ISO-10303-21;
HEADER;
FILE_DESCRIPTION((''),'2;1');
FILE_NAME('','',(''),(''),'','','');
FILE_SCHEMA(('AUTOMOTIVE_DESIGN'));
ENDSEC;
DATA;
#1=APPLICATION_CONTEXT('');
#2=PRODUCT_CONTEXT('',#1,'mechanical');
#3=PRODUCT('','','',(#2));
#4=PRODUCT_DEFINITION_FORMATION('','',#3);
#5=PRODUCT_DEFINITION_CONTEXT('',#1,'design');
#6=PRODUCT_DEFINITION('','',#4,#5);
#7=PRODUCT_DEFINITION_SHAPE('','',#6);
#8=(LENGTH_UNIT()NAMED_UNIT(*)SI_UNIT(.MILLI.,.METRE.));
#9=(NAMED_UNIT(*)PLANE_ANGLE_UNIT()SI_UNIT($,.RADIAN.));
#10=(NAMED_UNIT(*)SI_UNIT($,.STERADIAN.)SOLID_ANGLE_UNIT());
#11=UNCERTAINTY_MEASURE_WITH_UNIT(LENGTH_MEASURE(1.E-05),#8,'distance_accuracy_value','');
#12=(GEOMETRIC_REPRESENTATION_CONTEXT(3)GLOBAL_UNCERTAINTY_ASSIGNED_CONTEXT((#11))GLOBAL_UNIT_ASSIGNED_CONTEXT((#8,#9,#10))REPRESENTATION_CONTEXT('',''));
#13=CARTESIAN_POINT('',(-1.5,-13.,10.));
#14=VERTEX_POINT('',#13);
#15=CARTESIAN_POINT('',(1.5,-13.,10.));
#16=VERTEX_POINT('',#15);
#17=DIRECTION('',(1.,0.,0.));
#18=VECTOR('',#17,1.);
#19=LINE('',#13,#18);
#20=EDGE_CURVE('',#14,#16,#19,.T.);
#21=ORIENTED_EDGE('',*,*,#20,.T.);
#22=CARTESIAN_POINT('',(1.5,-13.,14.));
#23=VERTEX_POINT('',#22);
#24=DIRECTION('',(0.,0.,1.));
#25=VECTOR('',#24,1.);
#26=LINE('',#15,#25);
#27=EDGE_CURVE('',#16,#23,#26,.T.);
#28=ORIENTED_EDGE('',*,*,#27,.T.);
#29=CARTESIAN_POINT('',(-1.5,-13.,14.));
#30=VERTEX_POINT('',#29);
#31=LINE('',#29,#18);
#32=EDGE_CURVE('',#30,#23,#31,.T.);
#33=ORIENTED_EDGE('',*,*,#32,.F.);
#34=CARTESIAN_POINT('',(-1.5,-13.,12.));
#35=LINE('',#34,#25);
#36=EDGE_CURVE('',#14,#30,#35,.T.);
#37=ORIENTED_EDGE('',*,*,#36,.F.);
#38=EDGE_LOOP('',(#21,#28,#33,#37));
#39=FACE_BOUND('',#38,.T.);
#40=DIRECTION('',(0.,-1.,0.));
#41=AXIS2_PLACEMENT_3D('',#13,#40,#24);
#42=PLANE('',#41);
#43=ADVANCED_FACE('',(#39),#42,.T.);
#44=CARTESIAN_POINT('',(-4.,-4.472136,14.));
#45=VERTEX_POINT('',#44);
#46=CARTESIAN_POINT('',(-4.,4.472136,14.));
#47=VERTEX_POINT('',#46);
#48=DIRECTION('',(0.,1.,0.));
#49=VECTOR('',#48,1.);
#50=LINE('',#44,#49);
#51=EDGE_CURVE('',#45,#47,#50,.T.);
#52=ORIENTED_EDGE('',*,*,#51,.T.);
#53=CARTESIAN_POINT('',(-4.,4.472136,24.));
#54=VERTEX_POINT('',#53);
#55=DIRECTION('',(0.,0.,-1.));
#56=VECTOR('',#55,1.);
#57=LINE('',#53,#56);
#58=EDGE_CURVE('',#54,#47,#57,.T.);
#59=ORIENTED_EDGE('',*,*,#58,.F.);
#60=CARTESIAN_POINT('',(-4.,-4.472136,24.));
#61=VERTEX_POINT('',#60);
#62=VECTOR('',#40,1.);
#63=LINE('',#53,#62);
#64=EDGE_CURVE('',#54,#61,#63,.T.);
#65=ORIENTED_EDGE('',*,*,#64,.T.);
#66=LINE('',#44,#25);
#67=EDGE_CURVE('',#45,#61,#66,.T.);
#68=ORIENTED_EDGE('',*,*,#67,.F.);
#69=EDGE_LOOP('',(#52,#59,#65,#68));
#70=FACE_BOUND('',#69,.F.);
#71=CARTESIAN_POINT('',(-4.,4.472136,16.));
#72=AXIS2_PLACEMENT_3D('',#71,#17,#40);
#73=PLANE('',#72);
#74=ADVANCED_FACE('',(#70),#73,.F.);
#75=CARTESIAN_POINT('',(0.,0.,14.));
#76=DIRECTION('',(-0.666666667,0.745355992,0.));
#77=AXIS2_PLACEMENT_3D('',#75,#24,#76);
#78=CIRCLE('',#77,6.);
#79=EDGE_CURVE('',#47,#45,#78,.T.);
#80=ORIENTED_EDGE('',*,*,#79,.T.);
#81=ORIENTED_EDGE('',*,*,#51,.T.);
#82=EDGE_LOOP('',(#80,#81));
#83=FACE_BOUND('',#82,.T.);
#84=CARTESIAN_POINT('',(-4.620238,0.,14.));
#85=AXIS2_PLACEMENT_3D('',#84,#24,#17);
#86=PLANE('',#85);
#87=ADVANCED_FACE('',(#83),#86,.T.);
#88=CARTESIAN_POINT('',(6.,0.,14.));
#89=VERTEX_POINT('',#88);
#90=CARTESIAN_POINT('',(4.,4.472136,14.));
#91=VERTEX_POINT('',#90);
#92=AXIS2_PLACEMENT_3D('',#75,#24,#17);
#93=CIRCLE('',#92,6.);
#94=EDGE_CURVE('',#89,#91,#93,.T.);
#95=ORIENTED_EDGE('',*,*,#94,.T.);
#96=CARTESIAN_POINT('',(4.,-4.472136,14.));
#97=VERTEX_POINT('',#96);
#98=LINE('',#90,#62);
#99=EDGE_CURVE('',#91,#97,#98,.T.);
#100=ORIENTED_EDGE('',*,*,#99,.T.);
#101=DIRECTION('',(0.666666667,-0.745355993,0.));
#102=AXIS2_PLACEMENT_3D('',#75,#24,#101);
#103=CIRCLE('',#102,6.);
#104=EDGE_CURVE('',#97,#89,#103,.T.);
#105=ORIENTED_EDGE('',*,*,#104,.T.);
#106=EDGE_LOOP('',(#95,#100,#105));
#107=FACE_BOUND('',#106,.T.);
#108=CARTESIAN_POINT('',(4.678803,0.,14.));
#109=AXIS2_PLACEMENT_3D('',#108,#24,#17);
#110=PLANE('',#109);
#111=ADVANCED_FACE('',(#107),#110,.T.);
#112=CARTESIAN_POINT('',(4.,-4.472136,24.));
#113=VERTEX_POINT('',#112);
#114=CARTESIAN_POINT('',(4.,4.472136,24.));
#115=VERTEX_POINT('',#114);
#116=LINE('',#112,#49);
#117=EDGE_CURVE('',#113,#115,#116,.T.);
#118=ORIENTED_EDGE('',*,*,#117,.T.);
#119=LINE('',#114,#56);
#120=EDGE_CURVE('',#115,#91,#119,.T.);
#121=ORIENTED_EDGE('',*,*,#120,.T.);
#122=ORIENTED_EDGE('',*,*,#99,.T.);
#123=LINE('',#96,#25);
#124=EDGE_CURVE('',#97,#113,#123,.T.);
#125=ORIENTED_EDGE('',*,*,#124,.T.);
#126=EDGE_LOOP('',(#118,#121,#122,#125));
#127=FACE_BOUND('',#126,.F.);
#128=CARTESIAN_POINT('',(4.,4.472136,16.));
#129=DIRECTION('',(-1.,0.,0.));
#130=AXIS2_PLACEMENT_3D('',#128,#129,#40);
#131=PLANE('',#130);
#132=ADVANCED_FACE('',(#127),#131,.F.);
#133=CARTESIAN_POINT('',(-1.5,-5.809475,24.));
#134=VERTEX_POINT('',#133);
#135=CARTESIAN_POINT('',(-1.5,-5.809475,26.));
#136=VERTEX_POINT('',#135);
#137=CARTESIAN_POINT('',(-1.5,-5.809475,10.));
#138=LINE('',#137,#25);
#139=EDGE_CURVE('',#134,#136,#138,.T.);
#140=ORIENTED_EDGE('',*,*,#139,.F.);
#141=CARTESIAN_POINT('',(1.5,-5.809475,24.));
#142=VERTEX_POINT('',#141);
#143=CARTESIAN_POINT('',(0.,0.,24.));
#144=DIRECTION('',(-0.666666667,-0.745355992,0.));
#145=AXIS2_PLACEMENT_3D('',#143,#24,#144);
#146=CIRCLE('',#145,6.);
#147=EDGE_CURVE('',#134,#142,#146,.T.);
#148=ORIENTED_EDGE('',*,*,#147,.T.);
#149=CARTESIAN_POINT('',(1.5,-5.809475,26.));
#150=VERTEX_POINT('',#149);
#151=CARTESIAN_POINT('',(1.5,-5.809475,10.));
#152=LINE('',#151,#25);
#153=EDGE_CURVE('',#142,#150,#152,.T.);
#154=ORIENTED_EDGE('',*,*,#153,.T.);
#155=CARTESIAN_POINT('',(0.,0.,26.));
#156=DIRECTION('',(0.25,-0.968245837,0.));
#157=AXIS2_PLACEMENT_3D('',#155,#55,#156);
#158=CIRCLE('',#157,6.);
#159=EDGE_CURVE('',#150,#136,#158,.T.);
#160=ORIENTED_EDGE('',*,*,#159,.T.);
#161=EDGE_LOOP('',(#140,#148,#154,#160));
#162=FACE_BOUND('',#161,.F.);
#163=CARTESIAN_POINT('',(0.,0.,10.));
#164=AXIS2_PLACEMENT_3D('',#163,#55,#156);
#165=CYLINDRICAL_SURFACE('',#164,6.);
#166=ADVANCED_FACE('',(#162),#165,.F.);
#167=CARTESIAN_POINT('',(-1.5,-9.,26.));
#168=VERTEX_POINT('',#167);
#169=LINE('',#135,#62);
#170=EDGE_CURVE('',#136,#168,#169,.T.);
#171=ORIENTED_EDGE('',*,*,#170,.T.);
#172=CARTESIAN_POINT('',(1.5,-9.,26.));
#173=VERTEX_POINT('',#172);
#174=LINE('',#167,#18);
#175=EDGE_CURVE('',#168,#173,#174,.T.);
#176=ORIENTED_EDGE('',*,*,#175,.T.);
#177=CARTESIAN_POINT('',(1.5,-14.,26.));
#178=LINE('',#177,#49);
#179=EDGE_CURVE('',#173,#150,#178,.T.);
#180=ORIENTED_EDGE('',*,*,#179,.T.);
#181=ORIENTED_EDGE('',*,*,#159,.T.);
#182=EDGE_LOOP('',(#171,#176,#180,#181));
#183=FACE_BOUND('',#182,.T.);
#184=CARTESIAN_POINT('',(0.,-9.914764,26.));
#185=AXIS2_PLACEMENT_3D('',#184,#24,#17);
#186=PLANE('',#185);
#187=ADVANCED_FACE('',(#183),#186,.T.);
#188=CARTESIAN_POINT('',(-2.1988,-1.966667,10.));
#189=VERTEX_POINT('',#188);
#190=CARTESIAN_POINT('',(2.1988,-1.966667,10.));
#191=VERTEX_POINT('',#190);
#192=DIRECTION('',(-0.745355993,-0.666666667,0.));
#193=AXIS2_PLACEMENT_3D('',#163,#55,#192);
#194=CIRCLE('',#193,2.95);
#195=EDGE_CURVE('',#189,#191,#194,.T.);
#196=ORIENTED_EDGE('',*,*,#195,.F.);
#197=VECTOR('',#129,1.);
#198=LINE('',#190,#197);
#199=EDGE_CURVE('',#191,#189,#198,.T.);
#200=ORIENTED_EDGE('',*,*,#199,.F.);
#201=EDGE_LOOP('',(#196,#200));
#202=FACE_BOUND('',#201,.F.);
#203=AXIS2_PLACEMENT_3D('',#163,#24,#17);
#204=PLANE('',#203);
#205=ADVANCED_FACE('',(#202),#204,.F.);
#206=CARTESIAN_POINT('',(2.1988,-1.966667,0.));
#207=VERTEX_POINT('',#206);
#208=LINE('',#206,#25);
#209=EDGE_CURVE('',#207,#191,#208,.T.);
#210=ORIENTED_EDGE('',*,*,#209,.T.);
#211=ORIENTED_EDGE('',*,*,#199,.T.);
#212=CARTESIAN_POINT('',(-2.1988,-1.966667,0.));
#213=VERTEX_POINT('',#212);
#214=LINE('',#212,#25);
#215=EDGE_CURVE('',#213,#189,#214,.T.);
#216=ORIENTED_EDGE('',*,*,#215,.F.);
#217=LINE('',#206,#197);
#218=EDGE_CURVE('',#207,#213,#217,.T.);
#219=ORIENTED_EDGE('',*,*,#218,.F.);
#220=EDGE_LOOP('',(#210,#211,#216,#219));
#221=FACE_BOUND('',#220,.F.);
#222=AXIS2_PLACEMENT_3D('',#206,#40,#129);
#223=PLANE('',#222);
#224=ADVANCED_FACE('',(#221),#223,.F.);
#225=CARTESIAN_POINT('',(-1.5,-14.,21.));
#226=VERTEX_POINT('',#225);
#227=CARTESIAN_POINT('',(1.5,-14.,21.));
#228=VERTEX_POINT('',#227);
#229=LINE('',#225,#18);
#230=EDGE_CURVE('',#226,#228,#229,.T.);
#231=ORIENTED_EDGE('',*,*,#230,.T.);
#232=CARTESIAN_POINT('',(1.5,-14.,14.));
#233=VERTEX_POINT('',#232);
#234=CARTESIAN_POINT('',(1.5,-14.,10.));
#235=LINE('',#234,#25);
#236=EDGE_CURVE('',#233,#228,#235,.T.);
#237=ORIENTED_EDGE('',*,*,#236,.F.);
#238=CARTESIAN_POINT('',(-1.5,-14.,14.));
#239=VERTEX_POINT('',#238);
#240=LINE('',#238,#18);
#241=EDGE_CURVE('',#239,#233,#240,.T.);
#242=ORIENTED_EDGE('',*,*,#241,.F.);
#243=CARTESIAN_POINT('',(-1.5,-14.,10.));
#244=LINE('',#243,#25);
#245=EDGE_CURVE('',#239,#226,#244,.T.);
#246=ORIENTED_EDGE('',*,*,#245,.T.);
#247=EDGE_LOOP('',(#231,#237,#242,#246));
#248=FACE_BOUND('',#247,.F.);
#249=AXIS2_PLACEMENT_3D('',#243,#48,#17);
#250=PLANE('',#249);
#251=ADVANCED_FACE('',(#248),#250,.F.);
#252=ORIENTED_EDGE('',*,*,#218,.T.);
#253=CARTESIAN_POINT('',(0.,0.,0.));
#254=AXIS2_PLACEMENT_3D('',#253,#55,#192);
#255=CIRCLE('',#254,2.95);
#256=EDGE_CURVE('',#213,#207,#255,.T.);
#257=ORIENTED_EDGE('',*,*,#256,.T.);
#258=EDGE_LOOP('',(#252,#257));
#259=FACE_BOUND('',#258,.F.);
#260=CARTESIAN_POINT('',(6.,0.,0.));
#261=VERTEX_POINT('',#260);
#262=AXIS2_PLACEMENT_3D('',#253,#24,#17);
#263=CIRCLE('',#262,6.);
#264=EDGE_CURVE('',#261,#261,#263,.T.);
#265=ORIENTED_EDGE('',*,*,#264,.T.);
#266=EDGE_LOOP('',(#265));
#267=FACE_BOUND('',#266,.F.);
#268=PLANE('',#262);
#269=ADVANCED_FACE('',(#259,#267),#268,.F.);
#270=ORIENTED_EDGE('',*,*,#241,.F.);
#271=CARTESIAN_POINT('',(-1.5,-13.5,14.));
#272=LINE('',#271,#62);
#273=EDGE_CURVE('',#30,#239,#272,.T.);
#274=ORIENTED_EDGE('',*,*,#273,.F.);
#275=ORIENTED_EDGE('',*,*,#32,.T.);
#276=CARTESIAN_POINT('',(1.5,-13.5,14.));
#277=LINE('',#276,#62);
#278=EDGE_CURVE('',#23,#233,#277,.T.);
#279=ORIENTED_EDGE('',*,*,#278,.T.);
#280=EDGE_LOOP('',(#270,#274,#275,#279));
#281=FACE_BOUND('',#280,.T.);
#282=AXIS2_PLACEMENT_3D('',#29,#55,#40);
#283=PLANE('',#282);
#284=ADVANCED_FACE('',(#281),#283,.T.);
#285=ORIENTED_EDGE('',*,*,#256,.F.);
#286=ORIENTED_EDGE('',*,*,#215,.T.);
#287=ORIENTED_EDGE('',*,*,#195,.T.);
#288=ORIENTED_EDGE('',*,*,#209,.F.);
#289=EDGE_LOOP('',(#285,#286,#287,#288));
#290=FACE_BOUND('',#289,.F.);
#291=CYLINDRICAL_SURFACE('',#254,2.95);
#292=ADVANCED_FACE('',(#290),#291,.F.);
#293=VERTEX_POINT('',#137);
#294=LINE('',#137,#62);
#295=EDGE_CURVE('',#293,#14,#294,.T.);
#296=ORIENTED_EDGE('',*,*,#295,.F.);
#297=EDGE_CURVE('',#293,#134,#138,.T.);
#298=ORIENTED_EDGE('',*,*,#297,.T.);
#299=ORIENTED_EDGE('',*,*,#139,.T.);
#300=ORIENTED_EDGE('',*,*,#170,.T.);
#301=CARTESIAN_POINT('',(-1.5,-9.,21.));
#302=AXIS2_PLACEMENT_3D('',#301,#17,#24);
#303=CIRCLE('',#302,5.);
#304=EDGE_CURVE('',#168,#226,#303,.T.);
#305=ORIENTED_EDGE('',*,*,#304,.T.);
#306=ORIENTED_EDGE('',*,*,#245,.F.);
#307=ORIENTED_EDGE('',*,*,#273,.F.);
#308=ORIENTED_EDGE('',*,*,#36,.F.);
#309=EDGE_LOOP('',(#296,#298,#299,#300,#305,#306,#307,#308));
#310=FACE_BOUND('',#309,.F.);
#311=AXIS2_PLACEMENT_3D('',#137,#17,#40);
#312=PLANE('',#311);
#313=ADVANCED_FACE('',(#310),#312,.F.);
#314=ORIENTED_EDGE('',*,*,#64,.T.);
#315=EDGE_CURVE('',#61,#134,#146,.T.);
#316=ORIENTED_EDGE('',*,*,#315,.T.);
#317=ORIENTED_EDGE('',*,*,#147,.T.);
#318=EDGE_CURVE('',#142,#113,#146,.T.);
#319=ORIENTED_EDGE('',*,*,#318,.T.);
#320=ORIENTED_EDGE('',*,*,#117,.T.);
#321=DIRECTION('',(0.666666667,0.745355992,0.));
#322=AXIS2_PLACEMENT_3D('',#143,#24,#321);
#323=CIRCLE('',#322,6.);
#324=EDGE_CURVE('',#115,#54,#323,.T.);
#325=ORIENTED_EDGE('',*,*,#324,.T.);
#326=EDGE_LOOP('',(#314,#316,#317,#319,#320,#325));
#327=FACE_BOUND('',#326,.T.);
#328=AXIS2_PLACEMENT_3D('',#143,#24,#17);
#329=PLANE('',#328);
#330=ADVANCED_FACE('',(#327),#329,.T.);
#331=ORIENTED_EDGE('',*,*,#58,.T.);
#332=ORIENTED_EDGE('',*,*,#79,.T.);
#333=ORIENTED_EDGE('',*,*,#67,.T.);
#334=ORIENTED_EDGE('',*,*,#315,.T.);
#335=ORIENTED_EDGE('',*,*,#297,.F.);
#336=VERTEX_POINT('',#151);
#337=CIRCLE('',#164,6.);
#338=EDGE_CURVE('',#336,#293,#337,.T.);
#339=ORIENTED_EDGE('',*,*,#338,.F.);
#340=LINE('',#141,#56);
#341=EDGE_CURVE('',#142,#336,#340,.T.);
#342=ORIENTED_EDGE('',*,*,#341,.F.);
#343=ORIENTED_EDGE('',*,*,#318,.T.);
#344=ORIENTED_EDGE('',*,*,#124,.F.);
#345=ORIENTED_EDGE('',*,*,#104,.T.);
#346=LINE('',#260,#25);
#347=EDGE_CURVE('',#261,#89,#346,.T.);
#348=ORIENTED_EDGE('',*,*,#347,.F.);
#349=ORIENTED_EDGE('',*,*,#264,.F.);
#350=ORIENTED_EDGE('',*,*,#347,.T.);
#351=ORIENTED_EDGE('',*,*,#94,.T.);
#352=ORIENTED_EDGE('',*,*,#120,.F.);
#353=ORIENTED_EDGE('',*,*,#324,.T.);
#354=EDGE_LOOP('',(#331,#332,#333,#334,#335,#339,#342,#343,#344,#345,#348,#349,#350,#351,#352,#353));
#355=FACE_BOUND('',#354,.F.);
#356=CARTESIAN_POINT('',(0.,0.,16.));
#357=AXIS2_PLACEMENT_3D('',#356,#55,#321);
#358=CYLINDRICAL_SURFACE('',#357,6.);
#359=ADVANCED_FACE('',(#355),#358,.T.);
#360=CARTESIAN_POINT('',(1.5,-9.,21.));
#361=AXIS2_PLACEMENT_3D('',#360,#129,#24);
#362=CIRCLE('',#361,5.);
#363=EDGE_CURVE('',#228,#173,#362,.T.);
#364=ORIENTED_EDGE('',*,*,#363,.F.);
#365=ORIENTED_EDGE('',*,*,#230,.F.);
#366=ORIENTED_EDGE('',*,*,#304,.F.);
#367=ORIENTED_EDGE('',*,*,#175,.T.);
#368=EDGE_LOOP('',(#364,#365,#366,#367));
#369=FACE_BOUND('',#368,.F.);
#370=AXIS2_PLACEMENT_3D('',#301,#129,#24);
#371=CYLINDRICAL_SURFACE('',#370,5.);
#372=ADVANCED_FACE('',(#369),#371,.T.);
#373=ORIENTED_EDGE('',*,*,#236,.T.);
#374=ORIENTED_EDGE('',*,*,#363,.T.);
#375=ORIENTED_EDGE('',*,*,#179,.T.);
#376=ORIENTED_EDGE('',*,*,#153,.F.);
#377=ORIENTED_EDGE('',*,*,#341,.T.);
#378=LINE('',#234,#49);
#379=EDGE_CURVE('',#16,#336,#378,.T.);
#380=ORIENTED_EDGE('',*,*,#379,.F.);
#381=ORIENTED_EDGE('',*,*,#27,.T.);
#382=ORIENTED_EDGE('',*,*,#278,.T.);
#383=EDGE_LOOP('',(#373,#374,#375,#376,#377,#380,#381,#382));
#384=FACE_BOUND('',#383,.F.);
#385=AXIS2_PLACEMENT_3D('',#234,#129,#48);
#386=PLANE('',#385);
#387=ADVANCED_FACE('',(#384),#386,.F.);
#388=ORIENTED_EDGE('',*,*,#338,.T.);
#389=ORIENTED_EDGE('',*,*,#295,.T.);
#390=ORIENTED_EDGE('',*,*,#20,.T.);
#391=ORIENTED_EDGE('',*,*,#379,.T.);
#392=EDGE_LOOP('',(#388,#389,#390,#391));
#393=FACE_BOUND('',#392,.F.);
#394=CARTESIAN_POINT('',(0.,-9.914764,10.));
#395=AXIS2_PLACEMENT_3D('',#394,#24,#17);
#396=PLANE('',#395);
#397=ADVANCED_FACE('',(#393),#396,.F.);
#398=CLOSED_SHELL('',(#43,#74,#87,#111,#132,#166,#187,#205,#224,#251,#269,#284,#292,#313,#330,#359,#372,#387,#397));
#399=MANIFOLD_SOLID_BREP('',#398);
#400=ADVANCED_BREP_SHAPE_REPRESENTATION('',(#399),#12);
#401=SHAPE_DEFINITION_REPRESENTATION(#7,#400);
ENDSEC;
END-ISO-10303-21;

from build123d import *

# Parameters (mm, degrees)
F0_R      = 6
F1_DEPTH  = 10
F2_R      = 6
F3_DEPTH  = 6
F5_DEPTH  = 16
F7_DEPTH  = 8
F8_W      = 1
F8_H      = 4
F9_DEPTH  = 7.501
F10_DEPTH = 2


# Not quite as in the source:
# - a feature names something its author has since deleted; it is built from what else it names


with BuildPart() as f1:
    # F0 (on Top) → F1 (new body)
    with BuildSketch(Plane.XY):
        Circle(F0_R)
        with BuildLine():
            ThreePointArc((-2.1988001779, -1.9666666667), (0, 2.95), (2.1988001779, -1.9666666667))
            Line((2.1988001779, -1.9666666667), (-2.1988001779, -1.9666666667))
        make_face(mode=Mode.SUBTRACT)
    extrude(amount=F1_DEPTH)

    # F2 (on face) → F3 (join)
    with BuildSketch(Plane.XY.offset(10)):
        Circle(F2_R)
    extrude(amount=F3_DEPTH)



with BuildPart() as f5:
    # F4 (on face) → F5 (new body)
    with BuildSketch(Plane.XY.offset(10)):
        with BuildLine():
            ThreePointArc((1.5, -5.8094750193), (0, -6), (-1.5, -5.8094750193))
            Line((-1.5, -5.8094750193), (-1.5, -14))
            Line((-1.5, -14), (1.5, -14))
            Line((1.5, -14), (1.5, -5.8094750193))
        make_face()
    extrude(amount=F5_DEPTH)


with BuildPart() as f1_1:
    add(f1.part)

    add(f5.part)  # F7 merges F5
    # F6 (on face) → F7 (join)
    with BuildSketch(Plane.XY.offset(16)):
        with BuildLine():
            Line((-4, 4.472135955), (-4, -4.472135955))
            ThreePointArc((-4, -4.472135955), (0, -6), (4, -4.472135955))
            Line((4, -4.472135955), (4, 4.472135955))
            ThreePointArc((4, 4.472135955), (0, 6), (-4, 4.472135955))
        make_face()
    extrude(amount=F7_DEPTH)

    # F8 (on face) → F9 (cut, through all)
    with BuildSketch(Plane(origin=(-1.5, 0, 0), x_dir=(0, -1, 0), z_dir=(-1, 0, 0))):
        with BuildLine():
            ThreePointArc((9, 26), (12.5355339059, 24.5355339059), (14, 21))
            Line((14, 21), (14, 26))
            Line((14, 26), (9, 26))
        make_face()
        with Locations((13.5, 12)):
            Rectangle(F8_W, F8_H)
    extrude(amount=-F9_DEPTH, mode=Mode.SUBTRACT)

    # F6 (on face) → F10 (cut)
    with BuildSketch(Plane.XY.offset(16)):
        with BuildLine():
            Line((4, 4.472135955), (4, -4.472135955))
            ThreePointArc((4, -4.472135955), (5.4772255751, -2.4494897428), (6, 0))
            ThreePointArc((6, 0), (5.4772255751, 2.4494897428), (4, 4.472135955))
        make_face()
        with BuildLine():
            ThreePointArc((-4, 4.472135955), (-6, 0), (-4, -4.472135955))
            Line((-4, -4.472135955), (-4, 4.472135955))
        make_face()
    extrude(amount=-F10_DEPTH, mode=Mode.SUBTRACT)


solid = f1_1.part
